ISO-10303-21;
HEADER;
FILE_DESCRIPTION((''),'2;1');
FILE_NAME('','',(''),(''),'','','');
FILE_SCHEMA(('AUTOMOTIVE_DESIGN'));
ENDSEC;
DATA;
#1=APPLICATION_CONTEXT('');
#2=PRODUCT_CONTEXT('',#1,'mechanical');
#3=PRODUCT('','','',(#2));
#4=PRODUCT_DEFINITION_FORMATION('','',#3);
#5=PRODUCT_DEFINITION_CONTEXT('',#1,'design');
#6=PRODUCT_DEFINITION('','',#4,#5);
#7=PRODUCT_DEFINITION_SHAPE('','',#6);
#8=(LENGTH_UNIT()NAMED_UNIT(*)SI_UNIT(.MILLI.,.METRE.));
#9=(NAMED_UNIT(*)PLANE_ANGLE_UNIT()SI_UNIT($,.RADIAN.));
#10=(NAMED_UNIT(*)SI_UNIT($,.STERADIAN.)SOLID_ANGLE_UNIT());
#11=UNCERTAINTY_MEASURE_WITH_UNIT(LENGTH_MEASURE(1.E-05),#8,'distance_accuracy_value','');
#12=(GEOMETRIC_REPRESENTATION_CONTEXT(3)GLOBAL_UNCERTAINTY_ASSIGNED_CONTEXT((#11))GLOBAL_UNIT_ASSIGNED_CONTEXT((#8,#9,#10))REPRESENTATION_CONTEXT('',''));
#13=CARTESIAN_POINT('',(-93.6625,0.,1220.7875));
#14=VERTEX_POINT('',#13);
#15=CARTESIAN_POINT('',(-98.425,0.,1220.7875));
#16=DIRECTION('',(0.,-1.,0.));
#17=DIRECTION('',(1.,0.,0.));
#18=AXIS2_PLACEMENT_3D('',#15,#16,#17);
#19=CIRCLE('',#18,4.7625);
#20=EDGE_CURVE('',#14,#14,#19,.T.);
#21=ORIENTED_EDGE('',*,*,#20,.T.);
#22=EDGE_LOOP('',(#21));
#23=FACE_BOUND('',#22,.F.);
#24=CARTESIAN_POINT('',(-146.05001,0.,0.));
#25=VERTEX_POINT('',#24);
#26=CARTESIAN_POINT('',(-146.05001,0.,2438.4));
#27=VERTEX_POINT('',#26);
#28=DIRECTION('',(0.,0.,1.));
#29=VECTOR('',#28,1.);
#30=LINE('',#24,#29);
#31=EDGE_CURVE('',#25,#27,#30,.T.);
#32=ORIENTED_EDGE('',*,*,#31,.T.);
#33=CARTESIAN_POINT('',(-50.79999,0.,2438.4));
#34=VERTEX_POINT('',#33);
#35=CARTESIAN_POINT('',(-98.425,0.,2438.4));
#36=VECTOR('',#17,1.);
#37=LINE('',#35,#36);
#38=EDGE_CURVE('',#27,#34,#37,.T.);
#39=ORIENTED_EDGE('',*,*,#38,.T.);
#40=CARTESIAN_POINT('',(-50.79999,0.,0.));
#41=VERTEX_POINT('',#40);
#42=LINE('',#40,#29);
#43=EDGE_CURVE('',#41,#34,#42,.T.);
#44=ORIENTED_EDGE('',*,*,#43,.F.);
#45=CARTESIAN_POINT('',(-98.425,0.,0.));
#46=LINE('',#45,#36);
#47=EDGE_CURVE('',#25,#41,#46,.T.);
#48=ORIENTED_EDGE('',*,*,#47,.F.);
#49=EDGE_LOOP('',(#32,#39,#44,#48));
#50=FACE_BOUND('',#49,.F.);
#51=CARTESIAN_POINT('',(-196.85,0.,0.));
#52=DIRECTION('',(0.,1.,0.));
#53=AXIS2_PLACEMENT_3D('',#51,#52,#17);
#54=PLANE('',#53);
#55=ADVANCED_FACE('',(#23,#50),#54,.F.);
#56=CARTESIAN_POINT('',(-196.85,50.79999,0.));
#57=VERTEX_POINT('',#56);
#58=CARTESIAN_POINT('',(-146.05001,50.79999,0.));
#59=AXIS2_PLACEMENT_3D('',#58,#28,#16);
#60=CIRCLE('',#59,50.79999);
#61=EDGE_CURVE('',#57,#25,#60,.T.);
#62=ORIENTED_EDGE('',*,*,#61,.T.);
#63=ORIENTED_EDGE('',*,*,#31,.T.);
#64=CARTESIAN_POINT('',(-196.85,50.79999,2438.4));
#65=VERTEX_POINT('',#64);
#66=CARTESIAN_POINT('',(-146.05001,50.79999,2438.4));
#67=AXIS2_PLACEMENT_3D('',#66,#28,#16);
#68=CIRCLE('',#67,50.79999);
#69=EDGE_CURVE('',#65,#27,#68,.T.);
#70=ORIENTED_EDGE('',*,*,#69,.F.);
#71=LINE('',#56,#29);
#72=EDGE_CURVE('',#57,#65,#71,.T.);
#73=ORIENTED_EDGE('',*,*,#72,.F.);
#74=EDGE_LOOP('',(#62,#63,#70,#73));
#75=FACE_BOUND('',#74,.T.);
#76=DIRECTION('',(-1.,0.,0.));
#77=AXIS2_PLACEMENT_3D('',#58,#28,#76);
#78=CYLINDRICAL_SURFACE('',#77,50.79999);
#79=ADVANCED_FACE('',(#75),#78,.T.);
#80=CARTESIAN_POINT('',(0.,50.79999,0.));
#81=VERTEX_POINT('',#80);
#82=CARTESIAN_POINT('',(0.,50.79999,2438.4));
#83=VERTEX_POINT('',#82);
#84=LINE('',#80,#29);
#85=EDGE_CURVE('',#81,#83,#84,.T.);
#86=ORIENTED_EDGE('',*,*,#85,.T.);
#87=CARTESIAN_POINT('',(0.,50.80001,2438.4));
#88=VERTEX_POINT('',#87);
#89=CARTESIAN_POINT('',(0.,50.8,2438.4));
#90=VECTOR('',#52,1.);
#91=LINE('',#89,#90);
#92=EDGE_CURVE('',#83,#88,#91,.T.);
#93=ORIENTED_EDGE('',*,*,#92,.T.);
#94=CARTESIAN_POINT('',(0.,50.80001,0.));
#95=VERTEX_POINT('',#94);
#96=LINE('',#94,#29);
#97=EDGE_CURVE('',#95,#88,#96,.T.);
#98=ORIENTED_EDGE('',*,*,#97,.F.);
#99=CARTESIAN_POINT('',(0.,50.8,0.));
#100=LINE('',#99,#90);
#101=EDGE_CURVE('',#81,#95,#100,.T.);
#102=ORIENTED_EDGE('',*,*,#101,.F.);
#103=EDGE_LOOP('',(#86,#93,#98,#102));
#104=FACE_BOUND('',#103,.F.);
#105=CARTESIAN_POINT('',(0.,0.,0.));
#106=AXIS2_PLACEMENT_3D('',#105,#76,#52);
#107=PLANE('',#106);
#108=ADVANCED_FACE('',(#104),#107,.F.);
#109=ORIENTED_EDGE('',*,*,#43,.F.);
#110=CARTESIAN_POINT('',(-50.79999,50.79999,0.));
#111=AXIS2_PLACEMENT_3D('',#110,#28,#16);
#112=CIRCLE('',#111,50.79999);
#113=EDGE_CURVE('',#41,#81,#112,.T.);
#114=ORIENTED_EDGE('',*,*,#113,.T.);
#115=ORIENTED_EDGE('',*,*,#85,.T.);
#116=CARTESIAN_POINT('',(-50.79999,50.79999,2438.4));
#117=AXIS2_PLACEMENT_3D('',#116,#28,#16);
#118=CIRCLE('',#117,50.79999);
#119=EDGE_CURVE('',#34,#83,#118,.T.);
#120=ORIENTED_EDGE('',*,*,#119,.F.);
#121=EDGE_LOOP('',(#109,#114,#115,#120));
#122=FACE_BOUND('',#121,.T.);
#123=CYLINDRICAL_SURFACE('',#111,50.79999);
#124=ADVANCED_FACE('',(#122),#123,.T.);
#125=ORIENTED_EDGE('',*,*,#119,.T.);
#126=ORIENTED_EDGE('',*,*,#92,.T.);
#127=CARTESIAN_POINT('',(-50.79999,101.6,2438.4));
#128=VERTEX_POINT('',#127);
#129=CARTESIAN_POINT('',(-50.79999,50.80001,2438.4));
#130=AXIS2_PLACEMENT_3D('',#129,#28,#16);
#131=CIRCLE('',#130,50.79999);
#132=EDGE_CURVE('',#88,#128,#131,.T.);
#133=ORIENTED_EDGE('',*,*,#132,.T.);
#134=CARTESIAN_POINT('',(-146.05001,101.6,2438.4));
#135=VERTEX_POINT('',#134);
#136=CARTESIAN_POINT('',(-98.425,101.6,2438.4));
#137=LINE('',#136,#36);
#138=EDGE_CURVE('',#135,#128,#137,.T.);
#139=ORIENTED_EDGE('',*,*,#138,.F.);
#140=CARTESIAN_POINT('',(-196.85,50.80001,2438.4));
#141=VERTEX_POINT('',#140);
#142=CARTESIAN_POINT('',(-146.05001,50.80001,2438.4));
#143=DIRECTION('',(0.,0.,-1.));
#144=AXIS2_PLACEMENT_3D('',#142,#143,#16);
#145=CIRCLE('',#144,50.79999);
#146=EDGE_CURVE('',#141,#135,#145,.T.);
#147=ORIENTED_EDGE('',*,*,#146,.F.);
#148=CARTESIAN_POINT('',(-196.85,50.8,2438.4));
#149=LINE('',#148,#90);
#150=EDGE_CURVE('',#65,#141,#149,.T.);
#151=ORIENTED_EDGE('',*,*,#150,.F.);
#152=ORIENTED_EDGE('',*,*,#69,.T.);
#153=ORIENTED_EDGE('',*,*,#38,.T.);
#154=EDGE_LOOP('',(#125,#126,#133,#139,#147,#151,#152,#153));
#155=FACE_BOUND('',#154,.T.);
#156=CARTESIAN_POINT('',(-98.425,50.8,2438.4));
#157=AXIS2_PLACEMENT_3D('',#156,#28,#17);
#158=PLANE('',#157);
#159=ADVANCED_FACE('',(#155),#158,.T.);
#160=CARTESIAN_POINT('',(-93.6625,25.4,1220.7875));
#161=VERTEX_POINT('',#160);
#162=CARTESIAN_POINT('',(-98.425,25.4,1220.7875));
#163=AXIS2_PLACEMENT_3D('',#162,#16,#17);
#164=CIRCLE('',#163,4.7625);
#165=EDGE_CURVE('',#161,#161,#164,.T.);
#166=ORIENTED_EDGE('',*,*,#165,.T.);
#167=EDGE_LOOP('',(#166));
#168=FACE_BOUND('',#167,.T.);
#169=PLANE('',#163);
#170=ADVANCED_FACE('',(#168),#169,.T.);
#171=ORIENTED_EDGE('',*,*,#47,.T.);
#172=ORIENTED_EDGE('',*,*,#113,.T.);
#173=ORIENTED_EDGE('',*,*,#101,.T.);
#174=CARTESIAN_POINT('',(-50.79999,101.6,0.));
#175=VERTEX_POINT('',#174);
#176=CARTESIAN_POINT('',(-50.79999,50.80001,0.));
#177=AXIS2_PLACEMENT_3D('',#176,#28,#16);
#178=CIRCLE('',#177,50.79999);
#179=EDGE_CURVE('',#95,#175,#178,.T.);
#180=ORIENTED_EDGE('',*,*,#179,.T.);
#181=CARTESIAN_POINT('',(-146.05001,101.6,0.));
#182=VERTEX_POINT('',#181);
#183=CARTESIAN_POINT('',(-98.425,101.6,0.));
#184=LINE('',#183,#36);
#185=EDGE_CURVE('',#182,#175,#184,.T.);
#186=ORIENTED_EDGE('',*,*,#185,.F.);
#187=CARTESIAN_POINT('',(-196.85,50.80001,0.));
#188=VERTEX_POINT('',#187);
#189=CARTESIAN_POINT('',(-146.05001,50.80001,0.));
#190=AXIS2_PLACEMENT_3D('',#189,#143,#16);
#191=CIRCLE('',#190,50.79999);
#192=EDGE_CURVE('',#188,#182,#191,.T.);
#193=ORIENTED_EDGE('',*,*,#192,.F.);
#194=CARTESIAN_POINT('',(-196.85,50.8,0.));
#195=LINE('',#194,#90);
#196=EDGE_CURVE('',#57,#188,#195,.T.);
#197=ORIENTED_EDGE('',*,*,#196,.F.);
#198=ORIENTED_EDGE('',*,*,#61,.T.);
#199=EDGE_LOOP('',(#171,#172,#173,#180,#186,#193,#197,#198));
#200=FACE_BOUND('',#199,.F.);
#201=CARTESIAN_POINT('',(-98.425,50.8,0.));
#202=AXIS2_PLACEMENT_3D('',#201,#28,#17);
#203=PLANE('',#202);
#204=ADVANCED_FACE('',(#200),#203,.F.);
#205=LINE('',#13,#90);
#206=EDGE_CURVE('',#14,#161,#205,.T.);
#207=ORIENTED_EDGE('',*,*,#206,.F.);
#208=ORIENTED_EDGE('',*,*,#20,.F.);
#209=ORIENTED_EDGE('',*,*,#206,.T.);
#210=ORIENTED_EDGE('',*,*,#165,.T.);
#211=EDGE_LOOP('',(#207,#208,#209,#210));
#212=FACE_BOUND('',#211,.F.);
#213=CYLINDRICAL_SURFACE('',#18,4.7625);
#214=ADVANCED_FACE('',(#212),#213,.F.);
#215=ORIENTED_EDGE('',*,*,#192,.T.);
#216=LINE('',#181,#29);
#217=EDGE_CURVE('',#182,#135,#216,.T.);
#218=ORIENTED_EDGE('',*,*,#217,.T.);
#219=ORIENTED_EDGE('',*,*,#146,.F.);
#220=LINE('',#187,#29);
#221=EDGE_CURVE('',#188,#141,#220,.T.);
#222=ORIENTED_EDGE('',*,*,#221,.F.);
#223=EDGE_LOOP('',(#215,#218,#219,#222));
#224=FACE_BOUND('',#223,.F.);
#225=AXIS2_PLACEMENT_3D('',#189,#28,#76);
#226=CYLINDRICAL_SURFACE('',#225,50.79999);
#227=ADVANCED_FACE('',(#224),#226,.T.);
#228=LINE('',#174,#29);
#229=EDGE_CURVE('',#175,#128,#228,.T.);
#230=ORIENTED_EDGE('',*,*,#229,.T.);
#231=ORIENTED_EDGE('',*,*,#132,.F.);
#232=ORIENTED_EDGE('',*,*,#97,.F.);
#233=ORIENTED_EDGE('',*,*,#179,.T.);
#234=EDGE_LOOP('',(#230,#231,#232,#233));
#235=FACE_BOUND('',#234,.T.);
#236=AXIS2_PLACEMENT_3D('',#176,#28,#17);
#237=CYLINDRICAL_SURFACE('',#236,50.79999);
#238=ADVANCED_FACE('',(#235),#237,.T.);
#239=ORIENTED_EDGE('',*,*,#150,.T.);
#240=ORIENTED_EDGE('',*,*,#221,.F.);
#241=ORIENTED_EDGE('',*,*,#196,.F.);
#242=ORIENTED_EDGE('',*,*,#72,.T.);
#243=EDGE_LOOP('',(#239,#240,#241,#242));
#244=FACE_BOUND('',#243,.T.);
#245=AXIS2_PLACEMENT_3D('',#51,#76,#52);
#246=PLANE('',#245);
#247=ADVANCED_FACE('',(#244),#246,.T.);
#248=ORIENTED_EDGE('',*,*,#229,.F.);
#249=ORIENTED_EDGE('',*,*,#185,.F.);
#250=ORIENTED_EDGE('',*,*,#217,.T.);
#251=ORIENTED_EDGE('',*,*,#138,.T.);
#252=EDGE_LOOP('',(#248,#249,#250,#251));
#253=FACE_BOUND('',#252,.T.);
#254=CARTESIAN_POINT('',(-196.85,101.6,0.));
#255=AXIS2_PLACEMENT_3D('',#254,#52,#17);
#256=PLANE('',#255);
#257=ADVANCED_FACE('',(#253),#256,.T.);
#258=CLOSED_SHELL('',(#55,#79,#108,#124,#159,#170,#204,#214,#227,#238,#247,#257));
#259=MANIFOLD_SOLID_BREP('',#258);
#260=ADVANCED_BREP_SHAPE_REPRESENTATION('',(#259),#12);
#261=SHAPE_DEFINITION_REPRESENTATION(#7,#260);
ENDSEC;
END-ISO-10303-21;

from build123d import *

# Parameters (mm, degrees)
F0_W     = 196.85
F0_H     = 101.6
F1_DEPTH = 2438.4
F2_R     = 50.79999
F3_R     = 4.7625
F4_DEPTH = 25.4
F5_DEPTH = 25.4


# Not quite as in the source:
# - a fillet or chamfer is up to 0.001 mm smaller than in the source, because OpenCascade refuses the exact size


with BuildPart() as f1:
    # F0 (on Top) → F1 (new body)
    with BuildSketch(Plane.XY):
        with Locations((-98.425, 50.8)):
            Rectangle(F0_W, F0_H)
    extrude(amount=F1_DEPTH)

    # F2 (radius 50.8 in the source; OpenCascade refuses exactly that, so slightly less here)
    f2_edges = [f1.edges().sort_by_distance(p)[0] for p in [
        (0, 0, 1219.2),
        (-196.85, 0, 1219.2),
        (-196.85, 101.6, 1219.2),
        (0, 101.6, 1219.2),
    ]]
    fillet(f2_edges, radius=F2_R)

    # F3 (on face) → F4 (cut)
    with BuildSketch(Plane.XZ):
        with Locations((-98.425, 1220.7875)):
            Circle(F3_R)
    extrude(amount=-F4_DEPTH, mode=Mode.SUBTRACT)

    # F3 (on face) → F5 (cut)
    with BuildSketch(Plane.XZ):
        with Locations((-98.425, 1220.7875)):
            Circle(F3_R)
    extrude(amount=-F5_DEPTH, mode=Mode.SUBTRACT)


solid = f1.part
